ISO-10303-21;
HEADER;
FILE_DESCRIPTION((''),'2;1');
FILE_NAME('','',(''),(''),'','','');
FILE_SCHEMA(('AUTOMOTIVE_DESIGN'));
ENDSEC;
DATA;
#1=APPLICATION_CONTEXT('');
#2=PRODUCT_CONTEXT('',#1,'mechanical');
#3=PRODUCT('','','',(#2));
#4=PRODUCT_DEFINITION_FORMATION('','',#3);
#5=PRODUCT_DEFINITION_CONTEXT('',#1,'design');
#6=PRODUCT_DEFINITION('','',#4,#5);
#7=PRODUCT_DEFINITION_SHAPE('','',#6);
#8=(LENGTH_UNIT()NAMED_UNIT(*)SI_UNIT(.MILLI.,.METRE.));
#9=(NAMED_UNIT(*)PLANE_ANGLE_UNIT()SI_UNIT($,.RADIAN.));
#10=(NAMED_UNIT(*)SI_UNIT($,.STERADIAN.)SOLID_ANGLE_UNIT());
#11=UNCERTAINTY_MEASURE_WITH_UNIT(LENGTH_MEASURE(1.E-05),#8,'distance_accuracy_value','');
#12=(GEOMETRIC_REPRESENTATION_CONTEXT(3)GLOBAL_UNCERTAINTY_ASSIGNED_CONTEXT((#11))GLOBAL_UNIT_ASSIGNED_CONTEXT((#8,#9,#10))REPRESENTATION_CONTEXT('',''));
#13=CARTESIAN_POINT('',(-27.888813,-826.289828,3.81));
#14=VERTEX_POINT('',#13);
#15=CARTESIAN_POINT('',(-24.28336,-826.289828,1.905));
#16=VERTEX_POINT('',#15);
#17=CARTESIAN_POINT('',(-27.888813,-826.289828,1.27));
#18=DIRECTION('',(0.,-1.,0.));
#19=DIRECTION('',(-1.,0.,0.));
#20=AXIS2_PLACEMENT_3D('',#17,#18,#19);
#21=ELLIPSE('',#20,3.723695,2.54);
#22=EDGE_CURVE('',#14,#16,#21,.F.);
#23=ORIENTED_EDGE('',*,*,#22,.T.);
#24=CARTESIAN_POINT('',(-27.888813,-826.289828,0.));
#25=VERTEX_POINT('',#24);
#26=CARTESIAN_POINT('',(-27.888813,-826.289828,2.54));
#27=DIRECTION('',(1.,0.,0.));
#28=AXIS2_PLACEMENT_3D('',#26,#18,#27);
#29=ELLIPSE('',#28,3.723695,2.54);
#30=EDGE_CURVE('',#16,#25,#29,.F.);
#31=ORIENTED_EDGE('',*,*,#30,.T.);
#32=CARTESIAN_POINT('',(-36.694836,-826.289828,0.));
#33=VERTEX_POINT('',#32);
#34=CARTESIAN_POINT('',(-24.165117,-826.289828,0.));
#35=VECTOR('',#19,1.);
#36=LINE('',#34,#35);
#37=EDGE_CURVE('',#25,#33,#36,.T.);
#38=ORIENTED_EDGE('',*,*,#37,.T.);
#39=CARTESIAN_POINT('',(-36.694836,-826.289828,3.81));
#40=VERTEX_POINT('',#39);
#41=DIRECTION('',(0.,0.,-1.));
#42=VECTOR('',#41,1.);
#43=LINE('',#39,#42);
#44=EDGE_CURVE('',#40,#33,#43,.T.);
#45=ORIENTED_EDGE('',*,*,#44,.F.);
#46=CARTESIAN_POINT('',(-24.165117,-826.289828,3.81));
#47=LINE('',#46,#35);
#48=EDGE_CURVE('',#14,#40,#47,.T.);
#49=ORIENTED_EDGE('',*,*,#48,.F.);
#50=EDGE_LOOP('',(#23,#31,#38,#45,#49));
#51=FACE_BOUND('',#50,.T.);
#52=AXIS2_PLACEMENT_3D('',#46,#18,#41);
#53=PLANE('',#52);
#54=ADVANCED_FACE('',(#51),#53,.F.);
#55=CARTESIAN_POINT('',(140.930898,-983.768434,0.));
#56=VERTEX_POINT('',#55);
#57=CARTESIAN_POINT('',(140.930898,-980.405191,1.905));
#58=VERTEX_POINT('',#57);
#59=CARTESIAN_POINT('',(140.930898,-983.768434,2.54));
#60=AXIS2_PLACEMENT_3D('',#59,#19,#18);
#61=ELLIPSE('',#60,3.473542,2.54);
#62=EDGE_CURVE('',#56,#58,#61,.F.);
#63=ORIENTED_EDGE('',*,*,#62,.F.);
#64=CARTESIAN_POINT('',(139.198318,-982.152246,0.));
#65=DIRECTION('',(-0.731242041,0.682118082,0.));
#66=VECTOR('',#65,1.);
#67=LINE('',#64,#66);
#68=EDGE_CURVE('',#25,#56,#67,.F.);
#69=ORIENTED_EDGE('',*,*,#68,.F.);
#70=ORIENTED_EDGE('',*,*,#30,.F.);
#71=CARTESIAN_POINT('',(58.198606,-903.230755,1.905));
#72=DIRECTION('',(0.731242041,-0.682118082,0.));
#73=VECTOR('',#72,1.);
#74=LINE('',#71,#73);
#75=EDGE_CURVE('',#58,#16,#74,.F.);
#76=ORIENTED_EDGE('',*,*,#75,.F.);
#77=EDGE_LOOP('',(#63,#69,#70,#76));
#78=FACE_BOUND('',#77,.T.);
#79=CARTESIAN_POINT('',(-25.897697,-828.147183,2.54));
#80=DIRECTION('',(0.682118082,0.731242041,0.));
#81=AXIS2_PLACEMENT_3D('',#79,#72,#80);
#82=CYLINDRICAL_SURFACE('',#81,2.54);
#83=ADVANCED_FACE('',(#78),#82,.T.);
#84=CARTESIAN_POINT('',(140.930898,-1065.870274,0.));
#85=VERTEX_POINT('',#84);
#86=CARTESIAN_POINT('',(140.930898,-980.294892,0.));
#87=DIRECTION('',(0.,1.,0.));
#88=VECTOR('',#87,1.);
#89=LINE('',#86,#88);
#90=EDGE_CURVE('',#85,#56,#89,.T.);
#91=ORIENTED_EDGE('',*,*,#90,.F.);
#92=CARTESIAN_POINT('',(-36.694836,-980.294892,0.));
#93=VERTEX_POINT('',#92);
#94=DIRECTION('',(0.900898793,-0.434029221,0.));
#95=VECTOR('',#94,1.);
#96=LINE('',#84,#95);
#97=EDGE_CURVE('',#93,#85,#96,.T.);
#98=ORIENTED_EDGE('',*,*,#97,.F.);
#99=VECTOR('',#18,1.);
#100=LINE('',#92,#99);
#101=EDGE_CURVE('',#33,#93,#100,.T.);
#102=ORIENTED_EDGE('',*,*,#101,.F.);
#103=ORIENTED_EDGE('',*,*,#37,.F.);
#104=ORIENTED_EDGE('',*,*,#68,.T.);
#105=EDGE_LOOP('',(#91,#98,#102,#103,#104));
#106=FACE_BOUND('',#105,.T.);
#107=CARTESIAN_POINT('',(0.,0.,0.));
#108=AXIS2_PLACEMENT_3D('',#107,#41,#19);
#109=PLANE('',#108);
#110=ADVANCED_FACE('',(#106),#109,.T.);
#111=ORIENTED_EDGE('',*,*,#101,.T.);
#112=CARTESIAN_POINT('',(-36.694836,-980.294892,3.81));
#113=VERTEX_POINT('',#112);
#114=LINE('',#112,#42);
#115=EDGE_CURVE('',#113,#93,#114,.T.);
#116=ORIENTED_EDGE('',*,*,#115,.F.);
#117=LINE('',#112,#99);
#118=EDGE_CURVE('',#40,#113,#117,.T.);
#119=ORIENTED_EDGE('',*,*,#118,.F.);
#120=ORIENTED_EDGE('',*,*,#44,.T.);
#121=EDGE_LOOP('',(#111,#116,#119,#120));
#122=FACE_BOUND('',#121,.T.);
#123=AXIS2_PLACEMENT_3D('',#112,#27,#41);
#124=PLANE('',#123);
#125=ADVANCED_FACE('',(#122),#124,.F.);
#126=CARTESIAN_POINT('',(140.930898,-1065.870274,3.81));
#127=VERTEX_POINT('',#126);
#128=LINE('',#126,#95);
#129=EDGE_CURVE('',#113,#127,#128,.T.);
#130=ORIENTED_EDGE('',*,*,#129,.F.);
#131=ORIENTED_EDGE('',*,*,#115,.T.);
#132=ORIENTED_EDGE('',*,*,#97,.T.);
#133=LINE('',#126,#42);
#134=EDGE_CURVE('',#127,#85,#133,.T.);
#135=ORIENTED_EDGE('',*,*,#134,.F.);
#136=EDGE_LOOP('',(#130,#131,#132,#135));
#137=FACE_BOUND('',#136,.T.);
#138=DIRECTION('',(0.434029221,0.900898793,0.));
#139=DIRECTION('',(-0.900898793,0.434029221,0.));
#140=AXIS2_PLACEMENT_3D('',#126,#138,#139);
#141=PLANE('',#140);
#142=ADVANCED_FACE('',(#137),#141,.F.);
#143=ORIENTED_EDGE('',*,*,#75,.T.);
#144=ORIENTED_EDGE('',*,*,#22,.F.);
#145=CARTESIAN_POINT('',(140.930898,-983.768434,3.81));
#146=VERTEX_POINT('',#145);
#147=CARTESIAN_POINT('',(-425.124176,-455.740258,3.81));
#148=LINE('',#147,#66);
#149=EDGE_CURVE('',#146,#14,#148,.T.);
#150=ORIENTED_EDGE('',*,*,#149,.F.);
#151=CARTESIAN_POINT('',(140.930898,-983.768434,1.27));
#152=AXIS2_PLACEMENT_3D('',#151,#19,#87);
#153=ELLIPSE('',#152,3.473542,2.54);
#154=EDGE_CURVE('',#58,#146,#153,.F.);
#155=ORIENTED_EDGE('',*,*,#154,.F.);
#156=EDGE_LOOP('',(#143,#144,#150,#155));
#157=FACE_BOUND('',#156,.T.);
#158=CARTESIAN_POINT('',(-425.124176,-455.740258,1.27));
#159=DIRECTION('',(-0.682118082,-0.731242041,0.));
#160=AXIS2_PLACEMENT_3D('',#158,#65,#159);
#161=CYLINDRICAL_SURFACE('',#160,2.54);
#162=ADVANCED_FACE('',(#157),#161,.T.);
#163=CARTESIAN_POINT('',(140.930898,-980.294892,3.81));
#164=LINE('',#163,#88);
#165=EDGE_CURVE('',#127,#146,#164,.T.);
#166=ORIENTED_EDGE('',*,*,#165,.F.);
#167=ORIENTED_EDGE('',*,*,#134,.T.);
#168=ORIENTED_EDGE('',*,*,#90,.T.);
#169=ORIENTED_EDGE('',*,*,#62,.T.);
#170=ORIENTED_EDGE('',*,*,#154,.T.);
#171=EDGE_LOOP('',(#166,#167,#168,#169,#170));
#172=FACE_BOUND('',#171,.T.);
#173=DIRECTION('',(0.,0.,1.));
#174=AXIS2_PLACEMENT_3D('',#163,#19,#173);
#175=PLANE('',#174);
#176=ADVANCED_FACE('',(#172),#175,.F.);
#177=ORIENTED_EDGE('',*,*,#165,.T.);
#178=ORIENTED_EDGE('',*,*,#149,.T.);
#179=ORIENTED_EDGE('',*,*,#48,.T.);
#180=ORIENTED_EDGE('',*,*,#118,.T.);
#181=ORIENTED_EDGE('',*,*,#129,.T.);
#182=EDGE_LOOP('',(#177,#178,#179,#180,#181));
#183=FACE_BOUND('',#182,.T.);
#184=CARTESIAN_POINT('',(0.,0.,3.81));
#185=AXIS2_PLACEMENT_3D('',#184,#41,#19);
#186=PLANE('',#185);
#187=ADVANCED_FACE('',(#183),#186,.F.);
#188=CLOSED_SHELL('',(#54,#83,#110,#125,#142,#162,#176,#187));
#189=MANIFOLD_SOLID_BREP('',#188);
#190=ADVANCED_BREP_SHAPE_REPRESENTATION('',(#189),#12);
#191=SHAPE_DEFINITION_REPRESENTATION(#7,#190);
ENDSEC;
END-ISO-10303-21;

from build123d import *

# Parameters (mm, degrees)
BOSS_EXTRUDE1_DEPTH = 3.81
FILLET1_R           = 2.54


with BuildPart() as part:
    # Sketch2 → Boss-Extrude1 (new body)
    with BuildSketch(Plane.XY):
        Polygon((-24.165117367, -826.289827771), (140.930897986, -980.294891713), (140.930897986, -1065.870274418), (-36.694836072, -980.294891713), (-36.694836072, -826.289827771), align=None)
    extrude(amount=BOSS_EXTRUDE1_DEPTH)

    # Fillet1
    # the kernel refuses this fillet: 2.54 mm, written as the material it takes off along each edge
    with BuildSketch(Plane(origin=(-28.808504328, -821.958377953, 3.81), x_dir=(0, 0, -1), z_dir=(0.7312420410589273, -0.6821180817043146, 0))) as fillet1_piece_1:
        with BuildLine():
            CenterArc((FILLET1_R, -FILLET1_R), FILLET1_R, 90, 90)
            Line((0, -FILLET1_R), (0, 0))
            Line((0, 0), (FILLET1_R, 0))
        make_face()
    extrude(amount=238.474786026, mode=Mode.SUBTRACT)
    with BuildSketch(Plane(origin=(-28.808504328, -821.958377953, 0), x_dir=(0, 0, 1), z_dir=(0.7312420410589273, -0.6821180817043146, 0))) as fillet1_piece_2:
        with BuildLine():
            CenterArc((FILLET1_R, FILLET1_R), FILLET1_R, 180, 90)
            Line((0, FILLET1_R), (0, 0))
            Line((0, 0), (FILLET1_R, 0))
        make_face()
    extrude(amount=238.474786026, mode=Mode.SUBTRACT)


solid = part.part
